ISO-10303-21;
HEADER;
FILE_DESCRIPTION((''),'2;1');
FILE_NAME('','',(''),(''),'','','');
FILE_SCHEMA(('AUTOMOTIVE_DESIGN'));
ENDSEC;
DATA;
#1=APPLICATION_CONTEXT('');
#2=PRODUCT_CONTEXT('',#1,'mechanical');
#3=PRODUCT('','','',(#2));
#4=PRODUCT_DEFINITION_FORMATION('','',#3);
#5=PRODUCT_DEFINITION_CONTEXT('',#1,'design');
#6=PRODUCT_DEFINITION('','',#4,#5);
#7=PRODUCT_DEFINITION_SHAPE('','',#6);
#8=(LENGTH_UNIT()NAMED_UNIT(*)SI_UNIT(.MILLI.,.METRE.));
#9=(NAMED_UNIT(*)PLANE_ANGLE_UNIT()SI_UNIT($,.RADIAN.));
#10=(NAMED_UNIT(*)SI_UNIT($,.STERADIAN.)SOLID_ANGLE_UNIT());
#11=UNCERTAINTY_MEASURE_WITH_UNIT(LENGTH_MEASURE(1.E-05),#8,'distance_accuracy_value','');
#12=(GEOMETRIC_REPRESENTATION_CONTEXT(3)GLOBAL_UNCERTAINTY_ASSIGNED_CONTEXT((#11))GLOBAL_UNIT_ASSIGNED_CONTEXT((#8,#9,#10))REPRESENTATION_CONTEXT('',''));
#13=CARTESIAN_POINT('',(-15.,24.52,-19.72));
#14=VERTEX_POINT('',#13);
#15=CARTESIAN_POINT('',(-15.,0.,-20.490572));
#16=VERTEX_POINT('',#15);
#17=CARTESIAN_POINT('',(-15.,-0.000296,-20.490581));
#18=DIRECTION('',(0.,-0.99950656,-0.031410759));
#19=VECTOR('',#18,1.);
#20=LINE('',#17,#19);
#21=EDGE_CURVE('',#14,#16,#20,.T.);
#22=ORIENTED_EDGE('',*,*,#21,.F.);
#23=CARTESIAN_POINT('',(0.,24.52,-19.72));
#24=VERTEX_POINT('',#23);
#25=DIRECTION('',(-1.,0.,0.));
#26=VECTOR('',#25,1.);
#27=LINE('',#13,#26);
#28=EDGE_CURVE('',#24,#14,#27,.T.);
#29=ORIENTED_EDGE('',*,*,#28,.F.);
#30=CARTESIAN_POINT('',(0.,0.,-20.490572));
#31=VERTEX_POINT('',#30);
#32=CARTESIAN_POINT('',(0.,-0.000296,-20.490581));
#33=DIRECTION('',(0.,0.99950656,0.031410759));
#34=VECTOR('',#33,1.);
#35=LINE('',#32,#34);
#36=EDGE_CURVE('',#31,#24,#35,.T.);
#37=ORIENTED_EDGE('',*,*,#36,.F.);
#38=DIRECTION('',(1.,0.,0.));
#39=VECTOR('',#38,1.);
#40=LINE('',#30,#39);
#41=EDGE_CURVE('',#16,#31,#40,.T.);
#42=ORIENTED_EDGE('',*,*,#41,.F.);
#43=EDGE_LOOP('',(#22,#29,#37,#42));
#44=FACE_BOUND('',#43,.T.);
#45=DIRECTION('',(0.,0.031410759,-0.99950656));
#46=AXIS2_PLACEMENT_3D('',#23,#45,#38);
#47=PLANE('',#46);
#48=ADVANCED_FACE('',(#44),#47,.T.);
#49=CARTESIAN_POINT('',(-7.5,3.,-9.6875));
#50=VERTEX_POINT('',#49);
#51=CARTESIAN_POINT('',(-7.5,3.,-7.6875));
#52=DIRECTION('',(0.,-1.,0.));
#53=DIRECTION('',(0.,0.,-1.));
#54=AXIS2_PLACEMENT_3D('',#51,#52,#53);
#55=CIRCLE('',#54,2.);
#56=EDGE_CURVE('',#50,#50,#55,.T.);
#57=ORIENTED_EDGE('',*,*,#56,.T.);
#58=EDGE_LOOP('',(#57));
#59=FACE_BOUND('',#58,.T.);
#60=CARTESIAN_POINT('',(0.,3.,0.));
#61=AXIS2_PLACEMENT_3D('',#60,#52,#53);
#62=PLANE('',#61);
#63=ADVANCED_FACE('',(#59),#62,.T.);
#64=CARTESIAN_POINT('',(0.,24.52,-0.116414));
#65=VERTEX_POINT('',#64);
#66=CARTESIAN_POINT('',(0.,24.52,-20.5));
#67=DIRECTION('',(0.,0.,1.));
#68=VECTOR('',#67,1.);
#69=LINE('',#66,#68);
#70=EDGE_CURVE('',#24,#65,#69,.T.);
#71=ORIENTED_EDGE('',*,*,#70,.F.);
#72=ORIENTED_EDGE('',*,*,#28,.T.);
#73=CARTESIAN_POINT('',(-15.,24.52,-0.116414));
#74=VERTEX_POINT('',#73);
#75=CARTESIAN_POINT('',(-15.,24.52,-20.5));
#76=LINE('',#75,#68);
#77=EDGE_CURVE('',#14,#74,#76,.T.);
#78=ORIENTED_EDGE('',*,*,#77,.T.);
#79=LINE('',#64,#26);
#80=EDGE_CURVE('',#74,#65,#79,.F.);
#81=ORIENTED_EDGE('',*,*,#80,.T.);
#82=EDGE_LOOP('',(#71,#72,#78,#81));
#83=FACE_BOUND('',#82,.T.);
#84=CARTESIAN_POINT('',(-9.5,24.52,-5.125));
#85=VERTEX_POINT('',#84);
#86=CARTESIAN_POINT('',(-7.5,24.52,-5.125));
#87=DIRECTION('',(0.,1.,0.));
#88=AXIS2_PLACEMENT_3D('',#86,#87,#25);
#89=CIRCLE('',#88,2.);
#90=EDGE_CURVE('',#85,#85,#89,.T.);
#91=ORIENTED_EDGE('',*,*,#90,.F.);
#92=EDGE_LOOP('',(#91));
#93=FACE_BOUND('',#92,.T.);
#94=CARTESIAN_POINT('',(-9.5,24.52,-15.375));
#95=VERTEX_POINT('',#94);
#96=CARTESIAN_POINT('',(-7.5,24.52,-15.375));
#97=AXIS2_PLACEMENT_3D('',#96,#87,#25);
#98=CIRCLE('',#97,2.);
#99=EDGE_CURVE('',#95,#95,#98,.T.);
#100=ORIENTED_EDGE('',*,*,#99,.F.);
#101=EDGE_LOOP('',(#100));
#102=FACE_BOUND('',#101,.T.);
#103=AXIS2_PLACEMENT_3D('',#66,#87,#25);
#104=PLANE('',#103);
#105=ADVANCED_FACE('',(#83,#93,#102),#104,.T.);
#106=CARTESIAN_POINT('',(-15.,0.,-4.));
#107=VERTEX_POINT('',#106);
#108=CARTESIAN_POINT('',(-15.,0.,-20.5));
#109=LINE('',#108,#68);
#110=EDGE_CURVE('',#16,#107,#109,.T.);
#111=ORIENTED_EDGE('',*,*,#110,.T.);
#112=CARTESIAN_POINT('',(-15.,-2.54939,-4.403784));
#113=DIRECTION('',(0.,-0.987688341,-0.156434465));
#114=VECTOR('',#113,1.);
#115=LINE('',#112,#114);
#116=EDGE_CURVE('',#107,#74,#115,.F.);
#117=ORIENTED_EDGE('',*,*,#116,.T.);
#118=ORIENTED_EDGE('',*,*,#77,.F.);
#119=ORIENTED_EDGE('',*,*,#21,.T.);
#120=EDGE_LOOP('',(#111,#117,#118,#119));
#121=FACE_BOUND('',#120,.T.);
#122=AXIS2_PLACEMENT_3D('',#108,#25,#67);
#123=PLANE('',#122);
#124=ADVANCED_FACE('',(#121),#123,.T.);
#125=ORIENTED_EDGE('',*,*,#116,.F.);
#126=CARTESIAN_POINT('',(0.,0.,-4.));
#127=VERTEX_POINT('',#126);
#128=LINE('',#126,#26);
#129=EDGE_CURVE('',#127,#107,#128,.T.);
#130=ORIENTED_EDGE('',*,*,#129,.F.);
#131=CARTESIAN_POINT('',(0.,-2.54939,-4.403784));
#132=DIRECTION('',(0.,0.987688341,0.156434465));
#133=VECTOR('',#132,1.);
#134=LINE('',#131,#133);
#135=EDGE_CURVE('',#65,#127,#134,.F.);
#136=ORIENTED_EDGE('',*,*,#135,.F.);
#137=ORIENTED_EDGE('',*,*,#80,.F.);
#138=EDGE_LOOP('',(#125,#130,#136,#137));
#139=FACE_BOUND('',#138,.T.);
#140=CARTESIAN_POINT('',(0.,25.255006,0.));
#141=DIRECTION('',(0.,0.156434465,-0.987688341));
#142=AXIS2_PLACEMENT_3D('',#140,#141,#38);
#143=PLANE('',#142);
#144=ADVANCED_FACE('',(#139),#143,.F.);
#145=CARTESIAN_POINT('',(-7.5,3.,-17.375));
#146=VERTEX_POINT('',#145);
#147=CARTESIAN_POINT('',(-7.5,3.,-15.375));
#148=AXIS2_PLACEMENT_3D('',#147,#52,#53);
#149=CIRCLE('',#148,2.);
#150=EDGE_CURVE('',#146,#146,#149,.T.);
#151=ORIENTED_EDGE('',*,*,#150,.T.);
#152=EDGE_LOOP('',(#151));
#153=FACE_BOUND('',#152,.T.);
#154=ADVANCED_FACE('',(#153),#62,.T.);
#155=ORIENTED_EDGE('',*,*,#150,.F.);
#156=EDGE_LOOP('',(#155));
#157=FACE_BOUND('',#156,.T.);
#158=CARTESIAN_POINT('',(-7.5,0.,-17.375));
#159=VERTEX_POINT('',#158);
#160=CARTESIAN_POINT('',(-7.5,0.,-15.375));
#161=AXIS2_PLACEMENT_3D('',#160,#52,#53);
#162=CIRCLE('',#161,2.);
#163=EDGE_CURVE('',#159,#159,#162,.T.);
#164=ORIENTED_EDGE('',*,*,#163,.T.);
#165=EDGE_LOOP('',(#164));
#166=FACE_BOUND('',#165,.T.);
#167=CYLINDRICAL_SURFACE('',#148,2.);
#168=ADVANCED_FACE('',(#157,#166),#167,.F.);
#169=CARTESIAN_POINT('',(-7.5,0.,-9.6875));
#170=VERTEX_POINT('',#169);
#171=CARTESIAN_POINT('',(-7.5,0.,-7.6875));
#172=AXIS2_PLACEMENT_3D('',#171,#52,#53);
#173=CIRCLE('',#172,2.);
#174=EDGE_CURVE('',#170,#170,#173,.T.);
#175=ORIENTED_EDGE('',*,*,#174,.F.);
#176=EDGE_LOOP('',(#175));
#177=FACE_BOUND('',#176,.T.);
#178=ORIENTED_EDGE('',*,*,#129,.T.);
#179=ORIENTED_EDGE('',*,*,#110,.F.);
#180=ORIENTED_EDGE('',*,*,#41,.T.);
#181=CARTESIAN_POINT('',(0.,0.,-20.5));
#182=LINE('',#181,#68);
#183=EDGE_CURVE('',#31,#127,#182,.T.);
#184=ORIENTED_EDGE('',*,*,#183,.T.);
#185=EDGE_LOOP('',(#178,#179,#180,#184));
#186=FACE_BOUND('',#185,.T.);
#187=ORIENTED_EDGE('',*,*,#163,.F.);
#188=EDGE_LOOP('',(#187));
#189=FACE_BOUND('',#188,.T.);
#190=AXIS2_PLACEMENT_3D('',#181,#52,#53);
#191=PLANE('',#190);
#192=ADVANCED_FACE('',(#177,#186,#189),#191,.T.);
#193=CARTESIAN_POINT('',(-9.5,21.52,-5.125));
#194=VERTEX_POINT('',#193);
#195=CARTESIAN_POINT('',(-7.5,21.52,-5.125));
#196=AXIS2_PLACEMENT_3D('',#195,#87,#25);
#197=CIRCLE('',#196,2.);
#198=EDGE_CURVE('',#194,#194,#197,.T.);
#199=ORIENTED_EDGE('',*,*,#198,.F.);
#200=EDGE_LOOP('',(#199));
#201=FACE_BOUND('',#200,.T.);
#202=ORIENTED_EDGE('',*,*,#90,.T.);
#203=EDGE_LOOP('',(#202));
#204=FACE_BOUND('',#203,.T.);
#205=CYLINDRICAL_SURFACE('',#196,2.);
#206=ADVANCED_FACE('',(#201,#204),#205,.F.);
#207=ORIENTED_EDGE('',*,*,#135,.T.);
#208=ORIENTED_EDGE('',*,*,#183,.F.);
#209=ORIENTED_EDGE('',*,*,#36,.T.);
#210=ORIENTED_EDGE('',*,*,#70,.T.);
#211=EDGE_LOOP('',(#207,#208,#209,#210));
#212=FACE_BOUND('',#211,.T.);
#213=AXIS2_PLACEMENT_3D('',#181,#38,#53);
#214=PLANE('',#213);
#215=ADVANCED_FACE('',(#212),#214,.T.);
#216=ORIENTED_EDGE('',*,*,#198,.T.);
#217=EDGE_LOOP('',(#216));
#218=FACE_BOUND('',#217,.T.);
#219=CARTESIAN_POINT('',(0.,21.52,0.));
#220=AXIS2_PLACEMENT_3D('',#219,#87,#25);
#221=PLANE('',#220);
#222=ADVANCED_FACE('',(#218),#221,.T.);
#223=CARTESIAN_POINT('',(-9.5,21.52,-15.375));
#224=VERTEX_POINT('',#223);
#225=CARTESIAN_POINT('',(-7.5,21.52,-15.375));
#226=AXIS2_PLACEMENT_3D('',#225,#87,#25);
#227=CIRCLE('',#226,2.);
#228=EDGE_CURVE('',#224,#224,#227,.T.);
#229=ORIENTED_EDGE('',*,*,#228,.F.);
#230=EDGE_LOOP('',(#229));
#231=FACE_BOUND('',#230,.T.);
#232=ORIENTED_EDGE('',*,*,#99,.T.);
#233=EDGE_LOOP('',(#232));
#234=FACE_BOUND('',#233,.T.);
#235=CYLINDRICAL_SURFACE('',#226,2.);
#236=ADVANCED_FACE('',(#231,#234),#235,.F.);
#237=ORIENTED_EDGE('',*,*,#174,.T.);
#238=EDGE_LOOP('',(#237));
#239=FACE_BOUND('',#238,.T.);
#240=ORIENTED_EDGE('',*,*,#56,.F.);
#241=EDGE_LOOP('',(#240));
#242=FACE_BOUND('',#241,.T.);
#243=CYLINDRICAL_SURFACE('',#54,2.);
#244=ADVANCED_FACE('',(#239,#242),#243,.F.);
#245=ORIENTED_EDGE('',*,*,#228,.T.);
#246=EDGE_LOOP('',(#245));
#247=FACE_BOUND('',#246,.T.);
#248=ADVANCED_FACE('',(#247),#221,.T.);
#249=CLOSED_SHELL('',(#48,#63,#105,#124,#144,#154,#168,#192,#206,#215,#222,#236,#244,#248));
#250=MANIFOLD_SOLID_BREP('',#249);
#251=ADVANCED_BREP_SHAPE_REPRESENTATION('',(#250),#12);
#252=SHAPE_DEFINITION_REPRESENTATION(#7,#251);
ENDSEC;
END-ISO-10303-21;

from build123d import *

# Parameters (mm, degrees)
ESQUISSE1_W             = 15
ESQUISSE1_H             = 24.52
BOSS_EXTRU_1_DEPTH      = 20.5
ENL_V_MAT_EXTRU_2_DEPTH = 3
ENL_V_START             = -3
ENL_V_MAT_EXTRU_1_DEPTH = 3
CHANFREIN2_SIZE         = 4
CHANFREIN2_SIZE_2       = 25.255006059
CHANFREIN3_SIZE         = 24.820002444
CHANFREIN3_SIZE_2       = 0.78


with BuildPart() as part:
    # Esquisse1 → Boss.-Extru.1 (new body)
    with BuildSketch(Plane.XY):
        with Locations((-7.5, 12.26)):
            Rectangle(ESQUISSE1_W, ESQUISSE1_H)
    extrude(amount=-BOSS_EXTRU_1_DEPTH)

    # Esquisse3 → Enlèv. mat.-Extru.2 (cut)
    with BuildSketch(Plane.XZ):
        with BuildLine():
            ThreePointArc((-5.5, -15.375), (-6.085786438, -13.960786438), (-7.5, -13.375))
            Line((-7.5, -13.375), (-7.5, -15.375))
            Line((-7.5, -15.375), (-7.5, -17.375))
            ThreePointArc((-7.5, -17.375), (-6.085786438, -16.789213562), (-5.5, -15.375))
        make_face()
        with BuildLine():
            Line((-7.5, -15.375), (-7.5, -13.375))
            ThreePointArc((-7.5, -13.375), (-9.5, -15.375), (-7.5, -17.375))
            Line((-7.5, -17.375), (-7.5, -15.375))
        make_face()
        with BuildLine():
            ThreePointArc((-7.5, -5.6875), (-9.5, -7.6875), (-7.5, -9.6875))
            Line((-7.5, -9.6875), (-7.5, -5.6875))
        make_face()
        with BuildLine():
            Line((-7.5, -5.6875), (-7.5, -9.6875))
            ThreePointArc((-7.5, -9.6875), (-6.085786438, -9.101713562), (-5.5, -7.6875))
            ThreePointArc((-5.5, -7.6875), (-6.085786438, -6.273286438), (-7.5, -5.6875))
        make_face()
    extrude(amount=-ENL_V_MAT_EXTRU_2_DEPTH, mode=Mode.SUBTRACT)

    # Esquisse2 → Enlèv. mat.-Extru.1 (cut)
    with BuildSketch(Plane(origin=(0, 24.52, 0), x_dir=(1, 0, 0), z_dir=(0, 1, 0)).offset(ENL_V_START)):
        with BuildLine():
            ThreePointArc((-7.5, 17.375), (-9.5, 15.375), (-7.5, 13.375))
            Line((-7.5, 13.375), (-7.5, 17.375))
        make_face()
        with BuildLine():
            Line((-7.5, 17.375), (-7.5, 13.375))
            ThreePointArc((-7.5, 13.375), (-6.085786438, 13.960786438), (-5.5, 15.375))
            ThreePointArc((-5.5, 15.375), (-6.085786438, 16.789213562), (-7.5, 17.375))
        make_face()
        with BuildLine():
            ThreePointArc((-5.5, 5.125), (-6.085786438, 6.539213562), (-7.5, 7.125))
            Line((-7.5, 7.125), (-7.5, 3.125))
            ThreePointArc((-7.5, 3.125), (-6.085786438, 3.710786438), (-5.5, 5.125))
        make_face()
        with BuildLine():
            Line((-7.5, 3.125), (-7.5, 7.125))
            ThreePointArc((-7.5, 7.125), (-9.5, 5.125), (-7.5, 3.125))
        make_face()
    extrude(amount=ENL_V_MAT_EXTRU_1_DEPTH, mode=Mode.SUBTRACT)

    # Chanfrein2
    # the kernel refuses this chamfer: 25.255006059, 4 mm, written as the material it takes off along each edge
    with BuildSketch(Plane(origin=(65.633111729, 0, 0), x_dir=(0, -0.2333366369919624, -0.9723960169793381), z_dir=(-1, 0, 0))) as chanfrein2_piece_1:
        Polygon((CHANFREIN2_SIZE * 0.972396016979, -CHANFREIN2_SIZE * 0.233336636992), (-CHANFREIN2_SIZE_2 * 0.233336636989, -CHANFREIN2_SIZE_2 * 0.972396016968), (0, 0), align=None)
    extrude(amount=146.266223457, mode=Mode.SUBTRACT)

    # Chanfrein3
    # the kernel refuses this chamfer: 24.820002444, 0.78 mm, written as the material it takes off along each edge
    with BuildSketch(Plane(origin=(-79.530828731, 24.52, -20.5), x_dir=(0, -0.999999270212902, -0.0012081281651260673), z_dir=(1, 0, 0))) as chanfrein3_piece_1:
        Polygon((CHANFREIN3_SIZE * 0.999999270211, -CHANFREIN3_SIZE * 0.00120812816512), (-CHANFREIN3_SIZE_2 * 0.00120812816513, -CHANFREIN3_SIZE_2 * 0.999999270213), (0, 0), align=None)
    extrude(amount=144.061657461, mode=Mode.SUBTRACT)


solid = part.part
